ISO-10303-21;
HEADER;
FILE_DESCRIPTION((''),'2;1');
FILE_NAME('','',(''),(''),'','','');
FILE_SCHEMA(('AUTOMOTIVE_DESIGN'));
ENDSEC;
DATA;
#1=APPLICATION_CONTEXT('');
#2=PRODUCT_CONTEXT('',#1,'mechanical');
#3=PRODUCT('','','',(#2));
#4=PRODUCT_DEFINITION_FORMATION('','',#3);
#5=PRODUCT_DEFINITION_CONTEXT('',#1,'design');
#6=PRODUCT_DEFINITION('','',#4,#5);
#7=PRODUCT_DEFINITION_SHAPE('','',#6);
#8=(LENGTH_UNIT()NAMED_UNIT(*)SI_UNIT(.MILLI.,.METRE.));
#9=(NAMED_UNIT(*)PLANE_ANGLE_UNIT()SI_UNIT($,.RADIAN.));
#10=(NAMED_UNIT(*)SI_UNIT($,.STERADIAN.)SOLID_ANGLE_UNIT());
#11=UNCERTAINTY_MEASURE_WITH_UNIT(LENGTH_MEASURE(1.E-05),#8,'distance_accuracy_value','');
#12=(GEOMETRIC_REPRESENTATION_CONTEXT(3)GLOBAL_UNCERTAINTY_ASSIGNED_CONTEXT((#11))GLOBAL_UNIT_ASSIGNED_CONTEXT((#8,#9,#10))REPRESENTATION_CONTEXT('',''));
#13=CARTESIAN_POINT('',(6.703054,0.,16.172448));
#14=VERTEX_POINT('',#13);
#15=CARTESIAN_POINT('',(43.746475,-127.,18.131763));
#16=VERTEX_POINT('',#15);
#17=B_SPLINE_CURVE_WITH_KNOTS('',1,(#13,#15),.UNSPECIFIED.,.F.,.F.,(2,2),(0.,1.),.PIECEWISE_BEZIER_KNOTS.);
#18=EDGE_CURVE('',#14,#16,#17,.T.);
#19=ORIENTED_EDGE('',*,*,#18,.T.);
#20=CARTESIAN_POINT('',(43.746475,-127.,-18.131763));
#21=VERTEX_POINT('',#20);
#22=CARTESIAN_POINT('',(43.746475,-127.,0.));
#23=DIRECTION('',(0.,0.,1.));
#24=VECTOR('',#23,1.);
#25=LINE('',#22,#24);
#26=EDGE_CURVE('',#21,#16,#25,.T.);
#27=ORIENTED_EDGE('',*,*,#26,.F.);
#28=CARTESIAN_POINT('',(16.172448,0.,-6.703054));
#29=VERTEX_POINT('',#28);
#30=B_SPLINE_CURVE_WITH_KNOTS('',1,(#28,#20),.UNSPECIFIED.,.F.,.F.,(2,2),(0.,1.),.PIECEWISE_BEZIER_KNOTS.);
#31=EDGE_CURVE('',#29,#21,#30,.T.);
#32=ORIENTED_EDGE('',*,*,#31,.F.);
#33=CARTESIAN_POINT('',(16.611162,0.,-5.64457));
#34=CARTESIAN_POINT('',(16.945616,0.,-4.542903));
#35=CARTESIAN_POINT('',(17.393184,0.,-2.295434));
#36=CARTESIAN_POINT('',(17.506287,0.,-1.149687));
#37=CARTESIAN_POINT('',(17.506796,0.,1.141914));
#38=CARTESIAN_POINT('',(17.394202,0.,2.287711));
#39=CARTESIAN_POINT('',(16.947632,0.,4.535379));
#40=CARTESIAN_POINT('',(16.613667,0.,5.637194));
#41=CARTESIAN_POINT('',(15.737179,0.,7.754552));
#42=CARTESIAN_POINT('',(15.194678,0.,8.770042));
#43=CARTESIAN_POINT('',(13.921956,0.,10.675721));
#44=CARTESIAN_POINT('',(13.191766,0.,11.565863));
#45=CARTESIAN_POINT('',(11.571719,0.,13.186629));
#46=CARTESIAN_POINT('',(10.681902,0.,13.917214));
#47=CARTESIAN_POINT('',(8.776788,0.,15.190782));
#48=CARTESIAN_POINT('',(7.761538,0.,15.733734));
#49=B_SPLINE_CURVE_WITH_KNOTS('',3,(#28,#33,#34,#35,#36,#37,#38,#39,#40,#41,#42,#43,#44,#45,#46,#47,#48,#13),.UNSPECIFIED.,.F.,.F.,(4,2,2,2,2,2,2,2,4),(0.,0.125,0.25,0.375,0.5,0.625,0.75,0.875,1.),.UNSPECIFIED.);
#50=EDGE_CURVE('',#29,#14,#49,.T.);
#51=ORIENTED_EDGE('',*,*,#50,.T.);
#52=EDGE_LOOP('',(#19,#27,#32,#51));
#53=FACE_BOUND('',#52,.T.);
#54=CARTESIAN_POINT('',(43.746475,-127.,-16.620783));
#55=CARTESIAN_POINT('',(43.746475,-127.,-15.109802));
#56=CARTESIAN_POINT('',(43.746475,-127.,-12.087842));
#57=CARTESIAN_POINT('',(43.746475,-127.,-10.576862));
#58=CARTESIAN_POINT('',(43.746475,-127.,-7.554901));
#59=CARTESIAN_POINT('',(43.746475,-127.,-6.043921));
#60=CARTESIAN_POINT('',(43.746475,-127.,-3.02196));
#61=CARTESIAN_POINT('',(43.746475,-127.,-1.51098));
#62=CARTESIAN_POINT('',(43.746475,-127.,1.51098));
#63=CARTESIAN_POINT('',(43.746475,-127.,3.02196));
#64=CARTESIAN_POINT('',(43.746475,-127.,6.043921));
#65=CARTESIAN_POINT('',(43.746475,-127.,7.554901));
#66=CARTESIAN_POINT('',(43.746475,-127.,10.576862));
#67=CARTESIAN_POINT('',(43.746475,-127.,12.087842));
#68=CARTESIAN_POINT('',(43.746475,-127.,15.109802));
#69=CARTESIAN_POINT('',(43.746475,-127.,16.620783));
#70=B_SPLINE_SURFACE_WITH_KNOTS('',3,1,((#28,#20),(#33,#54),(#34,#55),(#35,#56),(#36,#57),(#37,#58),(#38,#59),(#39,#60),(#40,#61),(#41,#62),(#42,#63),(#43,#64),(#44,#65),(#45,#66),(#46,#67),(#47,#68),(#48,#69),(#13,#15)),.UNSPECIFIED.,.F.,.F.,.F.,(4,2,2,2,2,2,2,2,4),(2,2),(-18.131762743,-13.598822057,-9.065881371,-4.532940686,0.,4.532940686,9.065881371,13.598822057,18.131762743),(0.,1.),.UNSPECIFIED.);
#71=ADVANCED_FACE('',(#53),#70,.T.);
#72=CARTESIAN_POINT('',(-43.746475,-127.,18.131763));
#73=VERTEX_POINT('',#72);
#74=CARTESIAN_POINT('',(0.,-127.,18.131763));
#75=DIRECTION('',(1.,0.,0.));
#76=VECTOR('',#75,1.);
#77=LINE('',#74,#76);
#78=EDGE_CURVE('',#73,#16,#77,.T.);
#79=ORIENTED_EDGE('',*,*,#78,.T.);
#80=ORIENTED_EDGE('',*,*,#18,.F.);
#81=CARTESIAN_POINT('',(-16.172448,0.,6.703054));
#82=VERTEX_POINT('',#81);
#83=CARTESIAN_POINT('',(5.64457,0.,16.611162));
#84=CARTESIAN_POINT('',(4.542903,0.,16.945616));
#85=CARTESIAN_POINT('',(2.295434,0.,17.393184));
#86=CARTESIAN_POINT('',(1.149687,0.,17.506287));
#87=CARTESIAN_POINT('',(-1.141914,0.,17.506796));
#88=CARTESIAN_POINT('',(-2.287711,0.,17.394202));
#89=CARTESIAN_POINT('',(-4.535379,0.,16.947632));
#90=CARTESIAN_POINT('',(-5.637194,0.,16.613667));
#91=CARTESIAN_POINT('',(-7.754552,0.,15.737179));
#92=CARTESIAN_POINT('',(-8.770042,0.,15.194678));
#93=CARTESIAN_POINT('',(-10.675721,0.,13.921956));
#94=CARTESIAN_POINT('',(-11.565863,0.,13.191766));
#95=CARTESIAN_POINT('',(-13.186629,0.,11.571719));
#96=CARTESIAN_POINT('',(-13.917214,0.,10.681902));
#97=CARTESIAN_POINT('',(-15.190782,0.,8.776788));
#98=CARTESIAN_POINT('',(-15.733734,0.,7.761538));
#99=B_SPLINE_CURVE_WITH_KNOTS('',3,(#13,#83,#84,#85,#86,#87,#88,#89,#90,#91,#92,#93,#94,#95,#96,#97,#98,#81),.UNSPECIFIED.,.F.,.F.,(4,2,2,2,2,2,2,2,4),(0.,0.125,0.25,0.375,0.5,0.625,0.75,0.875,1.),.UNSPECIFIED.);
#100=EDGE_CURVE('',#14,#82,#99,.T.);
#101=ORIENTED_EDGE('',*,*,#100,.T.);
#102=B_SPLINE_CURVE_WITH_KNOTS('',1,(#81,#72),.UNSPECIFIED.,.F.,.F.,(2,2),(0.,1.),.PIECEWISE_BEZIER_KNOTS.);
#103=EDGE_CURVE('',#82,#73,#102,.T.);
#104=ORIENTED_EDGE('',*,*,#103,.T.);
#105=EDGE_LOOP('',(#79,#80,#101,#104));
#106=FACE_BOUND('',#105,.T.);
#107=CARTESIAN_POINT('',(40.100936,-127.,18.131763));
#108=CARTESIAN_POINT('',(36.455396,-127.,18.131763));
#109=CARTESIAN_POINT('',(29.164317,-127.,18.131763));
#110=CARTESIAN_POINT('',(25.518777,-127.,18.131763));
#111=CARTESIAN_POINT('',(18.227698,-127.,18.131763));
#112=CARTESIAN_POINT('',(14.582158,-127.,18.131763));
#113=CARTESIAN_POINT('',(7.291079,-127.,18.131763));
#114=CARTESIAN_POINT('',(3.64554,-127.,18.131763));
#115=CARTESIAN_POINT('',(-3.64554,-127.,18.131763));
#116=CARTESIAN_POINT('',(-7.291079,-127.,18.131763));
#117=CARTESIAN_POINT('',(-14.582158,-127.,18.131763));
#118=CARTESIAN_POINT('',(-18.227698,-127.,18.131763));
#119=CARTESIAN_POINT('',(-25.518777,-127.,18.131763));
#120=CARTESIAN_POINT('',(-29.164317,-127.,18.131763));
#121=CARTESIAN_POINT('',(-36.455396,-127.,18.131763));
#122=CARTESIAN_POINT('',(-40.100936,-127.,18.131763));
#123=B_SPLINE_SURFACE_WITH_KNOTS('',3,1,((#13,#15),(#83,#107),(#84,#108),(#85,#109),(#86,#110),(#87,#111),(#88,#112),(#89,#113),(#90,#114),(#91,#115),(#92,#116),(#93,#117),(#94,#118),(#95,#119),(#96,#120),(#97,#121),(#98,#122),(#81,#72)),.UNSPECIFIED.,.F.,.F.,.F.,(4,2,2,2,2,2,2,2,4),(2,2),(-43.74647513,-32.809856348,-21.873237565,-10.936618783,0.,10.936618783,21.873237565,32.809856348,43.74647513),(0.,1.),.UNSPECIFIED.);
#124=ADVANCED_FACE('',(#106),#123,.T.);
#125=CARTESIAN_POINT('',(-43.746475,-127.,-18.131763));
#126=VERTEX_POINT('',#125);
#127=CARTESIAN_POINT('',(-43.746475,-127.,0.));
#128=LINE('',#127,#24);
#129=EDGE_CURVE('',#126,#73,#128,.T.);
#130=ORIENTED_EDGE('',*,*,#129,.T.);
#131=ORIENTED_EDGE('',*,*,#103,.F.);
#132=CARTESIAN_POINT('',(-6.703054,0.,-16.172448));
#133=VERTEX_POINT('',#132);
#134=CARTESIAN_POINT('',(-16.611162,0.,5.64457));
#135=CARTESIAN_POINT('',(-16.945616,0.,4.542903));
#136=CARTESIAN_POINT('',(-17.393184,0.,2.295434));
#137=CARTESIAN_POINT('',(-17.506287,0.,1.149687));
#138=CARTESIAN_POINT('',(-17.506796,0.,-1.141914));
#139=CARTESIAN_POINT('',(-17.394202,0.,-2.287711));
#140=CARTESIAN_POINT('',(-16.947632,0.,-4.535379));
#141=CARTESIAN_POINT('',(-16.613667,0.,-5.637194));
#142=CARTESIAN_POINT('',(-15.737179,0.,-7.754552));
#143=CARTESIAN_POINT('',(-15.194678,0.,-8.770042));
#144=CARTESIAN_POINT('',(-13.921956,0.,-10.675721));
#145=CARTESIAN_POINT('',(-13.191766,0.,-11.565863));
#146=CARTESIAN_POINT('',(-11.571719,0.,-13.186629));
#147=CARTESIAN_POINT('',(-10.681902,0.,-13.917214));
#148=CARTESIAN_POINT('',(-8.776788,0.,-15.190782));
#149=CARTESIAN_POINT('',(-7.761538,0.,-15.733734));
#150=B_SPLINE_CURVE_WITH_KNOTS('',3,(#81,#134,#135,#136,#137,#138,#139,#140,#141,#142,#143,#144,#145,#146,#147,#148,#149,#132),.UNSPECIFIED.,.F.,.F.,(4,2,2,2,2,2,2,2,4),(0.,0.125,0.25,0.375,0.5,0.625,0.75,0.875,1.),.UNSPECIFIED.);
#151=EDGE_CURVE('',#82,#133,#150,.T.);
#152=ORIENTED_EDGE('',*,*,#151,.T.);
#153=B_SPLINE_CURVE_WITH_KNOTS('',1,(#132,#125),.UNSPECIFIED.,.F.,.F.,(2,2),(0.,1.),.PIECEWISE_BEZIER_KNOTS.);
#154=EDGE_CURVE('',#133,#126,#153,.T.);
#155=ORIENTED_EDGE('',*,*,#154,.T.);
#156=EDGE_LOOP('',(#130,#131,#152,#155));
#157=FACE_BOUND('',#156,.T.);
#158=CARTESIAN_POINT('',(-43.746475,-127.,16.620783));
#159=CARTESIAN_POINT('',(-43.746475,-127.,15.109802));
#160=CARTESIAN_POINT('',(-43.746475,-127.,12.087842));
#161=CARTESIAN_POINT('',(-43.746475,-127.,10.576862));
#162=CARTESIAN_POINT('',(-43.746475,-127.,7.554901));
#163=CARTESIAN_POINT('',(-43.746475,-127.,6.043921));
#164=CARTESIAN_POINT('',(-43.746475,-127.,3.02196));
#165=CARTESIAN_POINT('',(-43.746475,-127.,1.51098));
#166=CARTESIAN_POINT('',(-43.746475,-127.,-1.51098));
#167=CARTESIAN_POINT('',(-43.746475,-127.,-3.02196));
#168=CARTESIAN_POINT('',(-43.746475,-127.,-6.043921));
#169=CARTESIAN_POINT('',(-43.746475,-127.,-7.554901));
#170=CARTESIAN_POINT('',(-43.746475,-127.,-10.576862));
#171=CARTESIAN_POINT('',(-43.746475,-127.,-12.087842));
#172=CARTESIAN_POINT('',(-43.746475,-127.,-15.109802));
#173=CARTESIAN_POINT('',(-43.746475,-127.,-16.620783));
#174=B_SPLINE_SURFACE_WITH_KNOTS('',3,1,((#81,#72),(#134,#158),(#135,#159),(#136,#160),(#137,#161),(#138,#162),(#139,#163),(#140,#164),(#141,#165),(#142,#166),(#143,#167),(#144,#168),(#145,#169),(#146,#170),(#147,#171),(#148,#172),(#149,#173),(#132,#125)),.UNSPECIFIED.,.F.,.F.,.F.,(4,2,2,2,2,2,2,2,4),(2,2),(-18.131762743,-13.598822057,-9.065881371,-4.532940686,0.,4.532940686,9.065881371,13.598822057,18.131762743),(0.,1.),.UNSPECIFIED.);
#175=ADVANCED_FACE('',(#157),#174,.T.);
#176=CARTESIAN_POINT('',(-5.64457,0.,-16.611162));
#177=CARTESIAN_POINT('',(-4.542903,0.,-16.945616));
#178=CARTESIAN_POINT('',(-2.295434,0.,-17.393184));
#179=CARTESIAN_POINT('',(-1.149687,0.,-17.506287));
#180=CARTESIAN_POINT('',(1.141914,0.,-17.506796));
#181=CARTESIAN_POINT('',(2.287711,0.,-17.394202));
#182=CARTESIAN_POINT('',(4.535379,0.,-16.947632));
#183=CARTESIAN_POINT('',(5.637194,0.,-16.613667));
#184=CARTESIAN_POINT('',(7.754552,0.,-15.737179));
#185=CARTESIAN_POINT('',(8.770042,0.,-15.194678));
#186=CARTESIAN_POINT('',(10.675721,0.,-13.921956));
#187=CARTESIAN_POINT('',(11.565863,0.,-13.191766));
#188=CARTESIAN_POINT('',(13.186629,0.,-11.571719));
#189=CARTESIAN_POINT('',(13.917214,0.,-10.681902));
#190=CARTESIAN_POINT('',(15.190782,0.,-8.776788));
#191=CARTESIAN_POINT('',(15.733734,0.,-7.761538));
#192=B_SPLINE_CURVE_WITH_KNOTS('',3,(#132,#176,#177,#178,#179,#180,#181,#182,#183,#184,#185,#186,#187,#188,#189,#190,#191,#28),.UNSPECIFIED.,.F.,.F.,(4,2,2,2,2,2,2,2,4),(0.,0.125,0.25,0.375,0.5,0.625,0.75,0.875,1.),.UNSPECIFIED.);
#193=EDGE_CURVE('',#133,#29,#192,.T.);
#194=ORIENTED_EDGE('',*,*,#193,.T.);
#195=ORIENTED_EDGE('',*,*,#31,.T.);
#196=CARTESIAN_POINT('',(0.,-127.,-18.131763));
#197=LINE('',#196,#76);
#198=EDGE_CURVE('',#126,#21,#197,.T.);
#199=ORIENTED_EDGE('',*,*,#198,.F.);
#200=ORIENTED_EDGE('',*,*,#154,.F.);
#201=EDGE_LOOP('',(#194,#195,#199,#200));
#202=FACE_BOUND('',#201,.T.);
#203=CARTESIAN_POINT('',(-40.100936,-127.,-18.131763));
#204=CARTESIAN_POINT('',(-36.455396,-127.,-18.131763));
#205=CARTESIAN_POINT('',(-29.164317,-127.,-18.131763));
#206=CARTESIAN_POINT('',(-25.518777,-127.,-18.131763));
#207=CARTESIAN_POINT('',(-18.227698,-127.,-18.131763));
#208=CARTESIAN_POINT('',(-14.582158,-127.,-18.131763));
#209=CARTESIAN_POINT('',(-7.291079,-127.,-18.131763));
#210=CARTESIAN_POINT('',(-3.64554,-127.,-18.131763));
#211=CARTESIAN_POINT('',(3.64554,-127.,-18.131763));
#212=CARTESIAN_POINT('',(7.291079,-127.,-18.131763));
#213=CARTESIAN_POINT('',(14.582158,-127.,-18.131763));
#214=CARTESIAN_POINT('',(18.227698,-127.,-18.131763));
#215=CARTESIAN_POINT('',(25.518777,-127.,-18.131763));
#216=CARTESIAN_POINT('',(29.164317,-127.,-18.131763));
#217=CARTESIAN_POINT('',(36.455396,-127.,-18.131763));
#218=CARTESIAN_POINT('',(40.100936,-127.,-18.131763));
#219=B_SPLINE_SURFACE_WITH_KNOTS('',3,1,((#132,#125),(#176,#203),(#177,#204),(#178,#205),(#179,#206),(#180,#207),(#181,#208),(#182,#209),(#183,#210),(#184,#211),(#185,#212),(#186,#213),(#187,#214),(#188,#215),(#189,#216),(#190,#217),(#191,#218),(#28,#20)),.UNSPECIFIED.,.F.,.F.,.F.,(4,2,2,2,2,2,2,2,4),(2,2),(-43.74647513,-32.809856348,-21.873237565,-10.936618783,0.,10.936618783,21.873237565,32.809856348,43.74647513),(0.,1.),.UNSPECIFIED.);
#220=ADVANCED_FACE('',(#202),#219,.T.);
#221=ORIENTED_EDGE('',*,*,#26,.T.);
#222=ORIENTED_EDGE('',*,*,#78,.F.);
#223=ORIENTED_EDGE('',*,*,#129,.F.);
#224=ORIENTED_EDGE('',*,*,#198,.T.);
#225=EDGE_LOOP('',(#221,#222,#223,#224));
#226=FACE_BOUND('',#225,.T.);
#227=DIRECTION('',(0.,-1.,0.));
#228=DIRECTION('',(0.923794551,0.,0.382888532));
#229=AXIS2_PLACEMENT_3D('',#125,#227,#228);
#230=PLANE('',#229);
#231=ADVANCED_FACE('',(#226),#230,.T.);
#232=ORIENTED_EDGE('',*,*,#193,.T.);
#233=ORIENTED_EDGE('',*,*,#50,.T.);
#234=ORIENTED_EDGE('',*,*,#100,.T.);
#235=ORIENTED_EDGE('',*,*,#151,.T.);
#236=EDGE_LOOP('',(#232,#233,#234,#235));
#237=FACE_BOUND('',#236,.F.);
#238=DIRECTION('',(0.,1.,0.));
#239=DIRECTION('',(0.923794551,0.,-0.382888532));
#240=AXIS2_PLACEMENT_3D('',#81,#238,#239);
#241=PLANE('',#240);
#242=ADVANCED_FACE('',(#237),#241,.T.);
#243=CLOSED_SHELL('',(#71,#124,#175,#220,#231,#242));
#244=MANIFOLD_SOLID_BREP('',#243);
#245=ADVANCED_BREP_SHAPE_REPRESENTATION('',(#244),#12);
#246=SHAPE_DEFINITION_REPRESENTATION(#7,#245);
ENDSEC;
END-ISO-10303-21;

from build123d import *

# Parameters (mm, degrees)
F2_W = 87.4929502606
F2_H = 36.263525486


# Not quite as in the source:
# - the arcs of a loft's sections are written as splines that run evenly, so that the points pair up as in the source's solid


with BuildPart() as f3:
    # F0 (on Front) → F3 section 0
    with BuildSketch(Plane.XZ):
        with BuildLine():
            add(Edge.make_bspline(
                [(-16.1724482445, 6.7030542157), (-16.6111621171, 5.6445699533), (-16.9456161189, 4.5429033874), (-17.3931842646, 2.2954341579), (-17.5062873415, 1.1496870673), (-17.5067960951, -1.1419138849), (-17.3942017592, -2.2877110821), (-16.9476315696, -4.5353788174), (-16.6136667581, -5.6371937776), (-15.7371790672, -7.7545516855), (-15.1946778606, -8.7700422775), (-13.9219555988, -10.6757214811), (-13.1917660141, -11.5658629711), (-11.5717191842, -13.1866292872), (-10.6819019977, -13.9172140368), (-8.7767880909, -15.190782325), (-7.7615384781, -15.733734372), (-6.7030542157, -16.1724482445)],
                knots=[0, 0, 0, 0, 0.125, 0.125, 0.25, 0.25, 0.375, 0.375, 0.5, 0.5, 0.625, 0.625, 0.75, 0.75, 0.875, 0.875, 1, 1, 1, 1], degree=3))
            add(Edge.make_bspline(
                [(-6.7030542157, -16.1724482445), (-5.6445699533, -16.6111621171), (-4.5429033874, -16.9456161189), (-2.2954341579, -17.3931842646), (-1.1496870673, -17.5062873415), (1.1419138849, -17.5067960951), (2.2877110821, -17.3942017592), (4.5353788174, -16.9476315696), (5.6371937776, -16.6136667581), (7.7545516855, -15.7371790672), (8.7700422775, -15.1946778606), (10.6757214811, -13.9219555988), (11.5658629711, -13.1917660141), (13.1866292872, -11.5717191842), (13.9172140368, -10.6819019977), (15.190782325, -8.7767880909), (15.733734372, -7.7615384781), (16.1724482445, -6.7030542157)],
                knots=[0, 0, 0, 0, 0.125, 0.125, 0.25, 0.25, 0.375, 0.375, 0.5, 0.5, 0.625, 0.625, 0.75, 0.75, 0.875, 0.875, 1, 1, 1, 1], degree=3))
            add(Edge.make_bspline(
                [(16.1724482445, -6.7030542157), (16.6111621171, -5.6445699533), (16.9456161189, -4.5429033874), (17.3931842646, -2.2954341579), (17.5062873415, -1.1496870673), (17.5067960951, 1.1419138849), (17.3942017592, 2.2877110821), (16.9476315696, 4.5353788174), (16.6136667581, 5.6371937776), (15.7371790672, 7.7545516855), (15.1946778606, 8.7700422775), (13.9219555988, 10.6757214811), (13.1917660141, 11.5658629711), (11.5717191842, 13.1866292872), (10.6819019977, 13.9172140368), (8.7767880909, 15.190782325), (7.7615384781, 15.733734372), (6.7030542157, 16.1724482445)],
                knots=[0, 0, 0, 0, 0.125, 0.125, 0.25, 0.25, 0.375, 0.375, 0.5, 0.5, 0.625, 0.625, 0.75, 0.75, 0.875, 0.875, 1, 1, 1, 1], degree=3))
            add(Edge.make_bspline(
                [(6.7030542157, 16.1724482445), (5.6445699533, 16.6111621171), (4.5429033874, 16.9456161189), (2.2954341579, 17.3931842646), (1.1496870673, 17.5062873415), (-1.1419138849, 17.5067960951), (-2.2877110821, 17.3942017592), (-4.5353788174, 16.9476315696), (-5.6371937776, 16.6136667581), (-7.7545516855, 15.7371790672), (-8.7700422775, 15.1946778606), (-10.6757214811, 13.9219555988), (-11.5658629711, 13.1917660141), (-13.1866292872, 11.5717191842), (-13.9172140368, 10.6819019977), (-15.190782325, 8.7767880909), (-15.733734372, 7.7615384781), (-16.1724482445, 6.7030542157)],
                knots=[0, 0, 0, 0, 0.125, 0.125, 0.25, 0.25, 0.375, 0.375, 0.5, 0.5, 0.625, 0.625, 0.75, 0.75, 0.875, 0.875, 1, 1, 1, 1], degree=3))
        make_face()
    # F2 (on offset) → F3 section 1
    with BuildSketch(Plane.XZ.offset(127)):
        Rectangle(F2_W, F2_H)
    loft(ruled=True)


solid = f3.part
